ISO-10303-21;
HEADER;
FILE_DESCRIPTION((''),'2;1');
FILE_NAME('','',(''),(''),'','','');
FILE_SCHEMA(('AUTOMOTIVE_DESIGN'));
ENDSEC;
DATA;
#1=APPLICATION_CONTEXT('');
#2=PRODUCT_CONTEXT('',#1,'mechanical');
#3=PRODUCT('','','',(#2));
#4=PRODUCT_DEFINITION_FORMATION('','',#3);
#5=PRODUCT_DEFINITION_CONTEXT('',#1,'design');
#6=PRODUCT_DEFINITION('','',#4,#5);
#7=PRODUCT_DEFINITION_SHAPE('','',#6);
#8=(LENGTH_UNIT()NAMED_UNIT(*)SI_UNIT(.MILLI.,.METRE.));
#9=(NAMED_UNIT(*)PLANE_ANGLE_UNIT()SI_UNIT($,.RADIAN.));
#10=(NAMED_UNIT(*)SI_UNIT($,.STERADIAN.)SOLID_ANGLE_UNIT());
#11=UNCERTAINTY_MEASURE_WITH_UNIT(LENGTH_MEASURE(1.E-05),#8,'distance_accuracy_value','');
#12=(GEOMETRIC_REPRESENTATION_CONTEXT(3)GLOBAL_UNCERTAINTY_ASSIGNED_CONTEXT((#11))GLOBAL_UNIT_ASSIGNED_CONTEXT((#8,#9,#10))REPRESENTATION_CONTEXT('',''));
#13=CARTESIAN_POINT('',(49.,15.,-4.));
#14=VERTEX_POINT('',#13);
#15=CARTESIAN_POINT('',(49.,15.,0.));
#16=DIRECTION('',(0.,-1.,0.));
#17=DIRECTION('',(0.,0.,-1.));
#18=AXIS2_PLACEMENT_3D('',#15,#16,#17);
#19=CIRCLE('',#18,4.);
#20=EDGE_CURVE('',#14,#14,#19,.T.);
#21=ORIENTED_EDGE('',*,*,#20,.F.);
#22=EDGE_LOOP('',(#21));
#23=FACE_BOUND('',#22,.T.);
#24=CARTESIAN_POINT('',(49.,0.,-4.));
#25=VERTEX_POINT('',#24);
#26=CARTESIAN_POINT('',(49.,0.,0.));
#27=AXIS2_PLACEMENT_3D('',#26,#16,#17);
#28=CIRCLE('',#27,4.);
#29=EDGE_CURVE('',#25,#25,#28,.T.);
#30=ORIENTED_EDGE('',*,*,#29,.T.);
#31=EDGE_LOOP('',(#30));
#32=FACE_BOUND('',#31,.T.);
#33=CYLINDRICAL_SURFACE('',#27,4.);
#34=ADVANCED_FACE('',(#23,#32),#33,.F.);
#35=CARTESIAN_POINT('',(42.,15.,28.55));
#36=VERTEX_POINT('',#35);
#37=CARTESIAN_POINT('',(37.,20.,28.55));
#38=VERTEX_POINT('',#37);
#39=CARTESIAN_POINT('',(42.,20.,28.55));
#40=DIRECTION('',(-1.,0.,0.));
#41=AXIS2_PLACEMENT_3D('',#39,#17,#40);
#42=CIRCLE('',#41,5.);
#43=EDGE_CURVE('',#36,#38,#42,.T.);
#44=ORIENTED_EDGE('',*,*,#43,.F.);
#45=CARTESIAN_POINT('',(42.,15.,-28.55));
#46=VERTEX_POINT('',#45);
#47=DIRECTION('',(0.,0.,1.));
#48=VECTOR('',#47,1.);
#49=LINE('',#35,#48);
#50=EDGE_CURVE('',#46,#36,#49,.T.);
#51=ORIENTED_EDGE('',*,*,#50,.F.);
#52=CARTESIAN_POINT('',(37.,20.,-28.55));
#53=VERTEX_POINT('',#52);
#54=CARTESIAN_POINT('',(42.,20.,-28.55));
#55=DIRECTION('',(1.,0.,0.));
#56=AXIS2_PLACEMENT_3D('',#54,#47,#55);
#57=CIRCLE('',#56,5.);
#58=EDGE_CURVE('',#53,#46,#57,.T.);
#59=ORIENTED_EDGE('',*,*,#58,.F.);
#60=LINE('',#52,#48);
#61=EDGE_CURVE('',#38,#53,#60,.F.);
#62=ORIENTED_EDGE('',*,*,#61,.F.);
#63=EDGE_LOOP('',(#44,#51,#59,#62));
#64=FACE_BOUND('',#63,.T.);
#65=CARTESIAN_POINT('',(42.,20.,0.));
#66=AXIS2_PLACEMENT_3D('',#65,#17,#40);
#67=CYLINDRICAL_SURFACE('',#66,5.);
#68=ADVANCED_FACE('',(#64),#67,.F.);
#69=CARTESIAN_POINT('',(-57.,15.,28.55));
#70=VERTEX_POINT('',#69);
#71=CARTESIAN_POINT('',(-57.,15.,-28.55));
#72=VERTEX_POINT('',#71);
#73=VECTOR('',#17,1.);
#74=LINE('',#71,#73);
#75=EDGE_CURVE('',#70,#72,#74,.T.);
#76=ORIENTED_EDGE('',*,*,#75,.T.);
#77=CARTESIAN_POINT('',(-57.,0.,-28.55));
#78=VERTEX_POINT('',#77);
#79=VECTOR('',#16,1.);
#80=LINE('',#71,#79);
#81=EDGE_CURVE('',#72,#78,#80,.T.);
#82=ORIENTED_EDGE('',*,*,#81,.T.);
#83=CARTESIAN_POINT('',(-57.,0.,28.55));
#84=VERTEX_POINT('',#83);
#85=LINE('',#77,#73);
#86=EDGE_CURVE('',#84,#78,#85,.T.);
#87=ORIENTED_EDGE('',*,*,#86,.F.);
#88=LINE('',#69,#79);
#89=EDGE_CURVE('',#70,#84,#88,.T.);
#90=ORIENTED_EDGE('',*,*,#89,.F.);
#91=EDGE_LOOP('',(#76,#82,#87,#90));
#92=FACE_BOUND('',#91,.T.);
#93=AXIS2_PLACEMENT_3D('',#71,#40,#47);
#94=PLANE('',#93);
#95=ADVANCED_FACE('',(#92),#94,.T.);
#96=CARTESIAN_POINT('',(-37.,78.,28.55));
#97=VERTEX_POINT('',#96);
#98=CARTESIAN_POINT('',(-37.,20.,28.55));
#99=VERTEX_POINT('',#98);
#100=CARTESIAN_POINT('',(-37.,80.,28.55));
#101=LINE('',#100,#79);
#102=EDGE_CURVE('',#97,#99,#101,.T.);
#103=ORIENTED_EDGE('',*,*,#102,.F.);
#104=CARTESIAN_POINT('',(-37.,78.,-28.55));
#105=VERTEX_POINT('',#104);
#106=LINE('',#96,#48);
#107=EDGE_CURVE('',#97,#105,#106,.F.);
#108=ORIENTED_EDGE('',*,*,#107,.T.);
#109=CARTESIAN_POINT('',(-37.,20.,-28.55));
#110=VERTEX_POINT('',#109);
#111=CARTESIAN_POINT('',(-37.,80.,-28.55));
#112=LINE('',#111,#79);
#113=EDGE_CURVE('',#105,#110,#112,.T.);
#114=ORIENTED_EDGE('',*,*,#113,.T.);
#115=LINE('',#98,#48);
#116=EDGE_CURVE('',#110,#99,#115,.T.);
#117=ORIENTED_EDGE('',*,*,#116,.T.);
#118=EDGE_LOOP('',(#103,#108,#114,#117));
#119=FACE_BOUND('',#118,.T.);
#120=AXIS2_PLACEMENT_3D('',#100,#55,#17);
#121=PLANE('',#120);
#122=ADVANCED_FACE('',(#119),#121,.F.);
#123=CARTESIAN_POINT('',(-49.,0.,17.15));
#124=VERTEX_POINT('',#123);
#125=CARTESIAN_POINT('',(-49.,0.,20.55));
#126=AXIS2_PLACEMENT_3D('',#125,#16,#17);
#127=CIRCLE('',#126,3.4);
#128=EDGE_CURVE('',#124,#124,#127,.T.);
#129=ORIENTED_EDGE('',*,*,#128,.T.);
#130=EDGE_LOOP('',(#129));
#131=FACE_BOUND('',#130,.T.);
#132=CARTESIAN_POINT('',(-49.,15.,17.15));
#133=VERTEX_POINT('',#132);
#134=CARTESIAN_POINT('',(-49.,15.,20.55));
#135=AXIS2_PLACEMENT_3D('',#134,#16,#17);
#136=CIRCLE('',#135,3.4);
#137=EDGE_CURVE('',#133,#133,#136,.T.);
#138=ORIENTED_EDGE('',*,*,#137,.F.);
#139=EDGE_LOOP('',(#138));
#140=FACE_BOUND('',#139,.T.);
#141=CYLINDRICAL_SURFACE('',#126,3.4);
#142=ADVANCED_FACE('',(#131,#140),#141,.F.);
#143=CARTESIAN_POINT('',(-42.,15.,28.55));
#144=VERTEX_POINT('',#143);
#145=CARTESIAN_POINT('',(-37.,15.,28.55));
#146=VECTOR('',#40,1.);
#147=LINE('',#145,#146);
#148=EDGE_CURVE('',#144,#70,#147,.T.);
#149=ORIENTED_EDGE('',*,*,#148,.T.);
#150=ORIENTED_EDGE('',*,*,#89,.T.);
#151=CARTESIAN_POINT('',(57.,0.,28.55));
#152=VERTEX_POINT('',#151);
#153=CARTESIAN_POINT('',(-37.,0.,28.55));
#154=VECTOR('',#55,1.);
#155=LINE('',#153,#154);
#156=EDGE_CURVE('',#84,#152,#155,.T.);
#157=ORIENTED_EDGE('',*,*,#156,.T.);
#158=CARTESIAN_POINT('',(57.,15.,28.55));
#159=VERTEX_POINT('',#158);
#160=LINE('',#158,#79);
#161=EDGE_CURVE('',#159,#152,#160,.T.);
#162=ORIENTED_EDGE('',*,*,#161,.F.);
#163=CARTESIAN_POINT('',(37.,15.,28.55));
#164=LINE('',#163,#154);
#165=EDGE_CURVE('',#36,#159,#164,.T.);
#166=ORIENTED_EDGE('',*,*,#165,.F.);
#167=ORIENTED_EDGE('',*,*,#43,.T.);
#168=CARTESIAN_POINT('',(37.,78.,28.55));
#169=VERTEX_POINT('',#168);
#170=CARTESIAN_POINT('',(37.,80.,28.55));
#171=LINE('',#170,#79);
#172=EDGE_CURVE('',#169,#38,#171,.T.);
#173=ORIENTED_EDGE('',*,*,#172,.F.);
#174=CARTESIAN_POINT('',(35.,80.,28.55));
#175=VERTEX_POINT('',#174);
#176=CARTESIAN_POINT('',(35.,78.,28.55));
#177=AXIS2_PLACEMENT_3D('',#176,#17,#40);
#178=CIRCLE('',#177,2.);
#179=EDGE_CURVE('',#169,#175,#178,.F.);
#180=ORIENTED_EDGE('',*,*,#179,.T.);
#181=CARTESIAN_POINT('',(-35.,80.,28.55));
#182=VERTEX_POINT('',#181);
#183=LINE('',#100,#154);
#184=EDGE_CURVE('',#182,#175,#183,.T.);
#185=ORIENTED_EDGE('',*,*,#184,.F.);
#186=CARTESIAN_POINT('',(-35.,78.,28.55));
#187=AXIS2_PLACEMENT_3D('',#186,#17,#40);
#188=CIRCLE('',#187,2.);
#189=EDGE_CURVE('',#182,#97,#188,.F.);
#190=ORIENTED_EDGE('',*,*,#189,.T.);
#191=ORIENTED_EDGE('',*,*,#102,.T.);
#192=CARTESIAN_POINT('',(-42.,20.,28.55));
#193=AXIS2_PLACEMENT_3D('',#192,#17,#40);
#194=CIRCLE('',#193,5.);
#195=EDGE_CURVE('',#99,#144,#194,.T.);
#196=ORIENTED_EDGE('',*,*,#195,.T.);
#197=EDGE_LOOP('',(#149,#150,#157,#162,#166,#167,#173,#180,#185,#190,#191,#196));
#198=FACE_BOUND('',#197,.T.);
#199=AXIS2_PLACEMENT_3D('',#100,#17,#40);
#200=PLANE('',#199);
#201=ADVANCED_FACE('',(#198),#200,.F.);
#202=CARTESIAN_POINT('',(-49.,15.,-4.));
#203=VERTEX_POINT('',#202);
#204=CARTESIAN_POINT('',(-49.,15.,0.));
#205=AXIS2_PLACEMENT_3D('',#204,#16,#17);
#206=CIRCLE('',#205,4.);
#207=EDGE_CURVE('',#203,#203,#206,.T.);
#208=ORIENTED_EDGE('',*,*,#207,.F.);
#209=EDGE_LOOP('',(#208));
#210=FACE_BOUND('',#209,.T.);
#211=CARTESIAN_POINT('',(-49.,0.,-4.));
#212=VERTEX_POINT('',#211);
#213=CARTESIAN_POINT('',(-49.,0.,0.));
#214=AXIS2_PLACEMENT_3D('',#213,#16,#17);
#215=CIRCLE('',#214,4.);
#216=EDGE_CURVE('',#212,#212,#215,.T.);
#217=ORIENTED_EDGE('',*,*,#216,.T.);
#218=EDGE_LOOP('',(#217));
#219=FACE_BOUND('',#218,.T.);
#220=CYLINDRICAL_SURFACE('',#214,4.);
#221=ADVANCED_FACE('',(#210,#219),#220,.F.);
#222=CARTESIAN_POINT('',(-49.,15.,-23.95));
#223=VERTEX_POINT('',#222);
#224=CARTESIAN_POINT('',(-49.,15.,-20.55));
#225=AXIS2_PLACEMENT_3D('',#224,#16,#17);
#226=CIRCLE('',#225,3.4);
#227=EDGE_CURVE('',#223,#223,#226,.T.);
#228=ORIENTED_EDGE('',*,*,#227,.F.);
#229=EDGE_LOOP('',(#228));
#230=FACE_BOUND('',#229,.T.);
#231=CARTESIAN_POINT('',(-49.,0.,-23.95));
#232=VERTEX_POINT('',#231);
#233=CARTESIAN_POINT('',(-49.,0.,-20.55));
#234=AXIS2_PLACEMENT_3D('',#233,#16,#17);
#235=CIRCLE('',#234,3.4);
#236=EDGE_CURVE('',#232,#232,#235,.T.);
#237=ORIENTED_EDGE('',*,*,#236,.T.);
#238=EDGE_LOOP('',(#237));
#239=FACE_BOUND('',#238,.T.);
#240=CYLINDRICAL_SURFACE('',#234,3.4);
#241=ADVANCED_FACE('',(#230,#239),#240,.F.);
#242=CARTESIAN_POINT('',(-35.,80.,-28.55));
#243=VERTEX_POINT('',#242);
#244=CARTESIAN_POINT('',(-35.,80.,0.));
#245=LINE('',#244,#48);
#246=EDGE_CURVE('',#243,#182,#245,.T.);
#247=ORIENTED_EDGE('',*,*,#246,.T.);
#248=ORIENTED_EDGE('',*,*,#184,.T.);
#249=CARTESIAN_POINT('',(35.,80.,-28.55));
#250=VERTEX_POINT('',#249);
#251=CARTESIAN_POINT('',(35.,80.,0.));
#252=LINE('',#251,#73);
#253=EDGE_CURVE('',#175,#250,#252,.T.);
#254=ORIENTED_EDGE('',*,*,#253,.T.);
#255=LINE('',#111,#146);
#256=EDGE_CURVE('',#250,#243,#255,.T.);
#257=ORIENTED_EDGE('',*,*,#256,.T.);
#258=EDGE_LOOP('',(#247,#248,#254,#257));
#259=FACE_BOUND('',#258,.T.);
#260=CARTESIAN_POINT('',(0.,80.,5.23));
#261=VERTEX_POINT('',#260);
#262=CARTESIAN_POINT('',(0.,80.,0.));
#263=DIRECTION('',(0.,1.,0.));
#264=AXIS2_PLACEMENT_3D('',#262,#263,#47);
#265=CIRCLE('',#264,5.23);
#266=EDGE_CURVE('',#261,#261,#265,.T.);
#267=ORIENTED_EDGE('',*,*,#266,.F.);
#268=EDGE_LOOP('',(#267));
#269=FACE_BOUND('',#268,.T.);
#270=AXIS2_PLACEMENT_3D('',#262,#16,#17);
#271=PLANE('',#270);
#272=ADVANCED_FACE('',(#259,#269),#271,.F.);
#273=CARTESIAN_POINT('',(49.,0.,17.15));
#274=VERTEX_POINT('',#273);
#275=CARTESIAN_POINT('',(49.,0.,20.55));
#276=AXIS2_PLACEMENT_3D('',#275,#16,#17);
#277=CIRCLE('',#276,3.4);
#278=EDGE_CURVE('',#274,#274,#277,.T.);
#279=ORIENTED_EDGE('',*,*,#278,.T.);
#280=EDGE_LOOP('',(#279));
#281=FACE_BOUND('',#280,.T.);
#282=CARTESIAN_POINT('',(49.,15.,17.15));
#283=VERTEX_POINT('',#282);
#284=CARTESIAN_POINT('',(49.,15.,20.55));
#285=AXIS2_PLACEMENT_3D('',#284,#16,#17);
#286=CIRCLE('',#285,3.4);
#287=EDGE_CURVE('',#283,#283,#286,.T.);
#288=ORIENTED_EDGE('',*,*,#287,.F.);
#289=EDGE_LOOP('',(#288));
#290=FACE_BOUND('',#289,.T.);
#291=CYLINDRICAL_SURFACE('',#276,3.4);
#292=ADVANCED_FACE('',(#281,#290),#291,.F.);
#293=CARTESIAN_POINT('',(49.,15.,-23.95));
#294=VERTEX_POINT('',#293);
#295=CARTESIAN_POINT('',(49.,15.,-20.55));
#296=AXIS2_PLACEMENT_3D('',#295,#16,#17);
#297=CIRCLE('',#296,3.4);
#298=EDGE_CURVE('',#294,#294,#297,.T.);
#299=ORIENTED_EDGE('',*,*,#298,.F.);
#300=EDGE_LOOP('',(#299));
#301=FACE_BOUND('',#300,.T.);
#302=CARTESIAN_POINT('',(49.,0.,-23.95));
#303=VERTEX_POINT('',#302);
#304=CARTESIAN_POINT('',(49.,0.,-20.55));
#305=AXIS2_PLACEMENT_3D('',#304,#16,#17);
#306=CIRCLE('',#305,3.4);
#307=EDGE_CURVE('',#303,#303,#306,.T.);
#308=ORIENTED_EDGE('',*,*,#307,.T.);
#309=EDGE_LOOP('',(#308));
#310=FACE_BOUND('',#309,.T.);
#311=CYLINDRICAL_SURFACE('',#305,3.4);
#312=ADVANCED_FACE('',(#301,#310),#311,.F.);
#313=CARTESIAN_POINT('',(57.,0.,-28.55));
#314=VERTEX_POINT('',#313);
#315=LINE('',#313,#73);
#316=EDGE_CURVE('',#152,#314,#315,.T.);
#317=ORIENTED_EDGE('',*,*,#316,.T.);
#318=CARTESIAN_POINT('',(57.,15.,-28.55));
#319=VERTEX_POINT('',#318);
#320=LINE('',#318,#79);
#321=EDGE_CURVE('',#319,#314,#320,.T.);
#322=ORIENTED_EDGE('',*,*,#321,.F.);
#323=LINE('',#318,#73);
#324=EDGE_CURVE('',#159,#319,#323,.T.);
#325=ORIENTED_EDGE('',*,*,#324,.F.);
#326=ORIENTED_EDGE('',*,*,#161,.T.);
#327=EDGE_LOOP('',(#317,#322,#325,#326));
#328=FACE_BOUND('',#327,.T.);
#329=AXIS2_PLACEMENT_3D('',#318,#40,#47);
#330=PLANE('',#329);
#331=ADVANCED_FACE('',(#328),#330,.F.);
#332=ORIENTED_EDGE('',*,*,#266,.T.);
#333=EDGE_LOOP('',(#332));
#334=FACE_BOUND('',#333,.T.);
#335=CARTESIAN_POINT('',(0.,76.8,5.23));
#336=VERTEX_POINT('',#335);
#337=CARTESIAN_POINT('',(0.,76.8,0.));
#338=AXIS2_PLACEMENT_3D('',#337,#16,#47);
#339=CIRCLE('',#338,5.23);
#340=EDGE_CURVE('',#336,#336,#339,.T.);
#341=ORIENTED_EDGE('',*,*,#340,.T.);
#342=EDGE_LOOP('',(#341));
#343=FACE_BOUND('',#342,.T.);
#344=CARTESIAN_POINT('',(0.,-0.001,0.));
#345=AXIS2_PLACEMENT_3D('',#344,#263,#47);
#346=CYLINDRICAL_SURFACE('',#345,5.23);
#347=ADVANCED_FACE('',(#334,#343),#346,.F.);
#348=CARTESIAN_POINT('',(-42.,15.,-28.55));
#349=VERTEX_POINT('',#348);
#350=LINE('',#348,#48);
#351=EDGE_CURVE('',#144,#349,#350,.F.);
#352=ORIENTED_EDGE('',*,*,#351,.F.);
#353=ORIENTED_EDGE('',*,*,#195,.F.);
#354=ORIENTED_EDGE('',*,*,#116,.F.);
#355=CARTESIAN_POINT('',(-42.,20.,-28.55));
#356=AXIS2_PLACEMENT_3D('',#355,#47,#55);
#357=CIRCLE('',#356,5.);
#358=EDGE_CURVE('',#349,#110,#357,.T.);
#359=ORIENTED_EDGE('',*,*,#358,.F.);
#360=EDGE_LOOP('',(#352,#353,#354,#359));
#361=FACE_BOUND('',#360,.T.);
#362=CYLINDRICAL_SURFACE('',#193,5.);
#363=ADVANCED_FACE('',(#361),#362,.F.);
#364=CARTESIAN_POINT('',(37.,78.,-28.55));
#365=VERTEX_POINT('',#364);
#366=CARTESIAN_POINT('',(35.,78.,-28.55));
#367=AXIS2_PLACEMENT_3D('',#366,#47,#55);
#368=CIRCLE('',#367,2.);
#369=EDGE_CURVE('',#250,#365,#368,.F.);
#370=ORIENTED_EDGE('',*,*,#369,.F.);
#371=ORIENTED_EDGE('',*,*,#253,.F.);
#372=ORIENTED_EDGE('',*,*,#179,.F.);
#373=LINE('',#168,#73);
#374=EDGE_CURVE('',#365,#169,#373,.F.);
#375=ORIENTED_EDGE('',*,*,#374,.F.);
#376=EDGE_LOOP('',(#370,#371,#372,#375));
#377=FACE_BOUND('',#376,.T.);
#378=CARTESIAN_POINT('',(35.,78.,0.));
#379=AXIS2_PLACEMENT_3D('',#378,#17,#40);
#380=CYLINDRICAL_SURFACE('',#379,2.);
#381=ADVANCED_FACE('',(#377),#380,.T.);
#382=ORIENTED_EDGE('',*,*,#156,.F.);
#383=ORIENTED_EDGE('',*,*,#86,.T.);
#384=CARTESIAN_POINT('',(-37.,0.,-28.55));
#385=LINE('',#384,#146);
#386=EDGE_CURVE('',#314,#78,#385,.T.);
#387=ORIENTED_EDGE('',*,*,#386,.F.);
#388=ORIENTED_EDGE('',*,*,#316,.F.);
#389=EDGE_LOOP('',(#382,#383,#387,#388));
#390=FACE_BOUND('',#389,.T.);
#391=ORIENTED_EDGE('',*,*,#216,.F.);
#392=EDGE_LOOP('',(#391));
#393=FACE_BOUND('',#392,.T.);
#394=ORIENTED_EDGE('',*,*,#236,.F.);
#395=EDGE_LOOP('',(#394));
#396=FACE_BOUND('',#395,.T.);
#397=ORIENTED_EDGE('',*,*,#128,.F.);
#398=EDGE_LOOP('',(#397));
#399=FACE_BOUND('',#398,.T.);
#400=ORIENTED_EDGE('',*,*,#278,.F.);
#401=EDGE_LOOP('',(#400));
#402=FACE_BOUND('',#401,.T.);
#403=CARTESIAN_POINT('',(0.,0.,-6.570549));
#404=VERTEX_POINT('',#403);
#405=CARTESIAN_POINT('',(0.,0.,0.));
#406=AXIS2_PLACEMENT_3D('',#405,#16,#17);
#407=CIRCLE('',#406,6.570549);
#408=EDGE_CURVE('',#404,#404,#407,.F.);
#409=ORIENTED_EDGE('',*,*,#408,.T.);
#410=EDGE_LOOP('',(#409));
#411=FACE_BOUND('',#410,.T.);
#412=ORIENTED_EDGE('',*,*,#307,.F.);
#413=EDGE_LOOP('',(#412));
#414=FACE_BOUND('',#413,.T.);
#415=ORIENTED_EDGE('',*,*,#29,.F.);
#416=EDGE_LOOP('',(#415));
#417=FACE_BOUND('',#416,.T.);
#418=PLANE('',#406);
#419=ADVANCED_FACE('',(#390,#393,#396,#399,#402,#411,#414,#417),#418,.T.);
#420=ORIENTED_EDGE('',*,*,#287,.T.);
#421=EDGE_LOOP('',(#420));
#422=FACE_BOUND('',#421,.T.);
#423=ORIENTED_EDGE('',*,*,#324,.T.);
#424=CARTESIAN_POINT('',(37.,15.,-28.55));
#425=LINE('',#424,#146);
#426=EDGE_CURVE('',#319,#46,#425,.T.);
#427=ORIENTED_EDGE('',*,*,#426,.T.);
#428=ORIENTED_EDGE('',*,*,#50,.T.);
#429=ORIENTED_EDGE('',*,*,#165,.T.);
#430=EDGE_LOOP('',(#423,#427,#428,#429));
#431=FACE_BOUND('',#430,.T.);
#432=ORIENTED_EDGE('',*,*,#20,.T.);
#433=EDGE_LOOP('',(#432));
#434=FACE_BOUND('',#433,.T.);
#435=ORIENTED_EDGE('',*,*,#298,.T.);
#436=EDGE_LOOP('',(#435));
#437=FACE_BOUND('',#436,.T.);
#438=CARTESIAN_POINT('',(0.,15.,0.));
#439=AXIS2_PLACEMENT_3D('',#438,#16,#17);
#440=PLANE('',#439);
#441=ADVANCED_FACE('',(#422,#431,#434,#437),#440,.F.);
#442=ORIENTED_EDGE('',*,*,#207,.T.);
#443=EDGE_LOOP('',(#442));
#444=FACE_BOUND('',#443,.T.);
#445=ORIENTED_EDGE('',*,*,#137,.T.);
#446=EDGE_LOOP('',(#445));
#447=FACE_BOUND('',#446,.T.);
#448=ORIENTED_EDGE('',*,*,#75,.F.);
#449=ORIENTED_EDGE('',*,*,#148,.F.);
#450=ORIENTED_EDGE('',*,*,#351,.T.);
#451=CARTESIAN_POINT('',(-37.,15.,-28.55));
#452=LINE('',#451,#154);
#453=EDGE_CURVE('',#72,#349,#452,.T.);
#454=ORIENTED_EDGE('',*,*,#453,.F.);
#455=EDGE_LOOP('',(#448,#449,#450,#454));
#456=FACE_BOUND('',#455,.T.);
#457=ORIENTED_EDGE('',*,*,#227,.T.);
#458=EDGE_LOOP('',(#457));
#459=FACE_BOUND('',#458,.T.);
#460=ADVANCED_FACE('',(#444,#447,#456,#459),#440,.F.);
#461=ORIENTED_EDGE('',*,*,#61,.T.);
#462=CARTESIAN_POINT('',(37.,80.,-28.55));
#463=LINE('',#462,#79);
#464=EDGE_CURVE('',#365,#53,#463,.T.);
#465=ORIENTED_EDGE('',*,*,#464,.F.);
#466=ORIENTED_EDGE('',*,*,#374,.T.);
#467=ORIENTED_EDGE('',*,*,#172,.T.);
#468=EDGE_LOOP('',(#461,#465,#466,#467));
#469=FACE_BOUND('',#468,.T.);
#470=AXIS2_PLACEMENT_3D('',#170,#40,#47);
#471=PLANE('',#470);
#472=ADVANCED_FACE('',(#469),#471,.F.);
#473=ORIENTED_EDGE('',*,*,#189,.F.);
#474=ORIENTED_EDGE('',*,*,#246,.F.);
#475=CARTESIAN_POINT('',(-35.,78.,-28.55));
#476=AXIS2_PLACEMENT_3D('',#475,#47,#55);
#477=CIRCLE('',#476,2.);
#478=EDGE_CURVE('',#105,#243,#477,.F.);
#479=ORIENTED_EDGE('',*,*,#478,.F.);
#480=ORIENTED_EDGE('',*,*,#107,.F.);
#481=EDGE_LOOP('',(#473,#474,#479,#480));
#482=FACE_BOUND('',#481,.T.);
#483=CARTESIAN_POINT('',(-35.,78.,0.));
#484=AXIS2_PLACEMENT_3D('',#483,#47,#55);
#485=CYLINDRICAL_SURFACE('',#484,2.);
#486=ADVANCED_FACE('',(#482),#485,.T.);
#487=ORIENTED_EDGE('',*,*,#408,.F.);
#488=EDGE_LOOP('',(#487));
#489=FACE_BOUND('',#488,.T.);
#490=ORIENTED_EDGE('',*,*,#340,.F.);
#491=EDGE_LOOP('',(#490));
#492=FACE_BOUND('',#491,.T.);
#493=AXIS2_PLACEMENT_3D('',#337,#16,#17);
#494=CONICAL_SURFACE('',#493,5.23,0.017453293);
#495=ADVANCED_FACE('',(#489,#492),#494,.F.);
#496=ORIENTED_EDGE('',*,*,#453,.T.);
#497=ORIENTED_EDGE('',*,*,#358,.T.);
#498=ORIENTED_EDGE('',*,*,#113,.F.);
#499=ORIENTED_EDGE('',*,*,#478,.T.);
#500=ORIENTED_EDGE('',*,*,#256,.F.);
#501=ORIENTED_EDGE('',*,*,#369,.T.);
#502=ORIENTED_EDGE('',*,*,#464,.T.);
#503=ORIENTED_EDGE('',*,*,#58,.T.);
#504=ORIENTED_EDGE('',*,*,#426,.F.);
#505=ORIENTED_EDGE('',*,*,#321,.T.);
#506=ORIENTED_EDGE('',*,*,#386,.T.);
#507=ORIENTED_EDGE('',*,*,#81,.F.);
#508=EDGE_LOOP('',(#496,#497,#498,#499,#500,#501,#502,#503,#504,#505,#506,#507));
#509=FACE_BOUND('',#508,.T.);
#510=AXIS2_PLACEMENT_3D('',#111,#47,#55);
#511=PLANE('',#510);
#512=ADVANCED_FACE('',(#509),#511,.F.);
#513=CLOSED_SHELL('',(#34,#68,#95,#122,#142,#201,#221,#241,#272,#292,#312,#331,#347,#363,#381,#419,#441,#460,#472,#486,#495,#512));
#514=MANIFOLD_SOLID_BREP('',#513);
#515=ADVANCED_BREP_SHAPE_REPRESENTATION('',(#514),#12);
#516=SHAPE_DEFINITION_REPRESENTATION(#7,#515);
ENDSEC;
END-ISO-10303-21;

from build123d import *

# Parameters (mm, degrees)
SKETCH1_W             = 74
SKETCH1_H             = 57.1
BOSS_EXTRUDE1_DEPTH   = 80
FILLET1_R             = 2
CUT_EXTRUDE1_REACH    = 94.65
SKETCH2_R             = 5.23
SKETCH7_W             = 20
SKETCH7_H             = 57.1
BOSS_EXTRUDE2_DEPTH   = 15
M8_TAPPED_HOLE1_D     = 6.8
FILLET2_R             = 5
F_8_0MM_DOWEL_HOLE1_D = 8


# Read off the part's stored shape, not the designer's step: Draft1
with BuildPart() as part:
    # Sketch1 → Boss-Extrude1 (new body)
    with BuildSketch(Plane(origin=(0, 0, 0), x_dir=(1, 0, 0), z_dir=(0, 1, 0))):
        Rectangle(SKETCH1_W, SKETCH1_H)
    extrude(amount=BOSS_EXTRUDE1_DEPTH)

    # Fillet1
    fillet1_edges = [part.edges().sort_by_distance(p)[0] for p in [
        (-37, 80, 0),
        (37, 80, 0),
    ]]
    fillet(fillet1_edges, radius=FILLET1_R)

    # Sketch2 → Cut-Extrude1 (cut, up to next)
    with BuildSketch(Plane(origin=(0, 80, 0), x_dir=(1, 0, 0), z_dir=(0, 1, 0)), mode=Mode.PRIVATE) as cut_extrude1_sk1:
        with Locations(Location((0, 0, 0), (0, 0, 270))):
            Circle(SKETCH2_R)
    cut_extrude1_tool1 = extrude(cut_extrude1_sk1.sketch, amount=-CUT_EXTRUDE1_REACH, mode=Mode.PRIVATE) & part.part
    add(cut_extrude1_tool1.solids().sort_by_distance((0, 80, 0))[0], mode=Mode.SUBTRACT)

    # Draft1 outline → Draft1 (revolve, cut)
    with BuildSketch(Plane.XY):
        Polygon((6.570548986, 0), (5.23, 76.8), (5.23, 0), align=None)
    revolve(axis=Axis((0, 0, 0), (0, 1, 0)), mode=Mode.SUBTRACT)

    # Sketch7 → Boss-Extrude2 (add)
    with BuildSketch(Plane.XZ):
        with Locations((-47, 0)):
            Rectangle(SKETCH7_W, SKETCH7_H)
    boss_extrude2 = extrude(amount=-BOSS_EXTRUDE2_DEPTH)

    # Mirror1: Boss-Extrude2 across plane
    add(boss_extrude2.mirror(Plane(origin=(0, 0, 0), x_dir=(0, 0, 1), z_dir=(1, 0, 0))))

    # M8 Tapped Hole1 (through all)
    with Locations(Plane(origin=(0, 0, 0), x_dir=(-1, 0, 0), z_dir=(0, -1, 0))):
        with Locations((-49, 20.55), (49, 20.55), (49, -20.55), (-49, -20.55)):
            Hole(M8_TAPPED_HOLE1_D / 2)

    # Fillet2
    fillet2_edges = [part.edges().sort_by_distance(p)[0] for p in [
        (-37, 15, 0),
        (37, 15, 0),
    ]]
    fillet(fillet2_edges, radius=FILLET2_R)

    # Ø8.0mm Dowel Hole1 (through all)
    with Locations(Plane(origin=(0, 0, 0), x_dir=(-1, 0, 0), z_dir=(0, -1, 0))):
        with Locations((-49, 0), (49, 0)):
            Hole(F_8_0MM_DOWEL_HOLE1_D / 2)


solid = part.part
